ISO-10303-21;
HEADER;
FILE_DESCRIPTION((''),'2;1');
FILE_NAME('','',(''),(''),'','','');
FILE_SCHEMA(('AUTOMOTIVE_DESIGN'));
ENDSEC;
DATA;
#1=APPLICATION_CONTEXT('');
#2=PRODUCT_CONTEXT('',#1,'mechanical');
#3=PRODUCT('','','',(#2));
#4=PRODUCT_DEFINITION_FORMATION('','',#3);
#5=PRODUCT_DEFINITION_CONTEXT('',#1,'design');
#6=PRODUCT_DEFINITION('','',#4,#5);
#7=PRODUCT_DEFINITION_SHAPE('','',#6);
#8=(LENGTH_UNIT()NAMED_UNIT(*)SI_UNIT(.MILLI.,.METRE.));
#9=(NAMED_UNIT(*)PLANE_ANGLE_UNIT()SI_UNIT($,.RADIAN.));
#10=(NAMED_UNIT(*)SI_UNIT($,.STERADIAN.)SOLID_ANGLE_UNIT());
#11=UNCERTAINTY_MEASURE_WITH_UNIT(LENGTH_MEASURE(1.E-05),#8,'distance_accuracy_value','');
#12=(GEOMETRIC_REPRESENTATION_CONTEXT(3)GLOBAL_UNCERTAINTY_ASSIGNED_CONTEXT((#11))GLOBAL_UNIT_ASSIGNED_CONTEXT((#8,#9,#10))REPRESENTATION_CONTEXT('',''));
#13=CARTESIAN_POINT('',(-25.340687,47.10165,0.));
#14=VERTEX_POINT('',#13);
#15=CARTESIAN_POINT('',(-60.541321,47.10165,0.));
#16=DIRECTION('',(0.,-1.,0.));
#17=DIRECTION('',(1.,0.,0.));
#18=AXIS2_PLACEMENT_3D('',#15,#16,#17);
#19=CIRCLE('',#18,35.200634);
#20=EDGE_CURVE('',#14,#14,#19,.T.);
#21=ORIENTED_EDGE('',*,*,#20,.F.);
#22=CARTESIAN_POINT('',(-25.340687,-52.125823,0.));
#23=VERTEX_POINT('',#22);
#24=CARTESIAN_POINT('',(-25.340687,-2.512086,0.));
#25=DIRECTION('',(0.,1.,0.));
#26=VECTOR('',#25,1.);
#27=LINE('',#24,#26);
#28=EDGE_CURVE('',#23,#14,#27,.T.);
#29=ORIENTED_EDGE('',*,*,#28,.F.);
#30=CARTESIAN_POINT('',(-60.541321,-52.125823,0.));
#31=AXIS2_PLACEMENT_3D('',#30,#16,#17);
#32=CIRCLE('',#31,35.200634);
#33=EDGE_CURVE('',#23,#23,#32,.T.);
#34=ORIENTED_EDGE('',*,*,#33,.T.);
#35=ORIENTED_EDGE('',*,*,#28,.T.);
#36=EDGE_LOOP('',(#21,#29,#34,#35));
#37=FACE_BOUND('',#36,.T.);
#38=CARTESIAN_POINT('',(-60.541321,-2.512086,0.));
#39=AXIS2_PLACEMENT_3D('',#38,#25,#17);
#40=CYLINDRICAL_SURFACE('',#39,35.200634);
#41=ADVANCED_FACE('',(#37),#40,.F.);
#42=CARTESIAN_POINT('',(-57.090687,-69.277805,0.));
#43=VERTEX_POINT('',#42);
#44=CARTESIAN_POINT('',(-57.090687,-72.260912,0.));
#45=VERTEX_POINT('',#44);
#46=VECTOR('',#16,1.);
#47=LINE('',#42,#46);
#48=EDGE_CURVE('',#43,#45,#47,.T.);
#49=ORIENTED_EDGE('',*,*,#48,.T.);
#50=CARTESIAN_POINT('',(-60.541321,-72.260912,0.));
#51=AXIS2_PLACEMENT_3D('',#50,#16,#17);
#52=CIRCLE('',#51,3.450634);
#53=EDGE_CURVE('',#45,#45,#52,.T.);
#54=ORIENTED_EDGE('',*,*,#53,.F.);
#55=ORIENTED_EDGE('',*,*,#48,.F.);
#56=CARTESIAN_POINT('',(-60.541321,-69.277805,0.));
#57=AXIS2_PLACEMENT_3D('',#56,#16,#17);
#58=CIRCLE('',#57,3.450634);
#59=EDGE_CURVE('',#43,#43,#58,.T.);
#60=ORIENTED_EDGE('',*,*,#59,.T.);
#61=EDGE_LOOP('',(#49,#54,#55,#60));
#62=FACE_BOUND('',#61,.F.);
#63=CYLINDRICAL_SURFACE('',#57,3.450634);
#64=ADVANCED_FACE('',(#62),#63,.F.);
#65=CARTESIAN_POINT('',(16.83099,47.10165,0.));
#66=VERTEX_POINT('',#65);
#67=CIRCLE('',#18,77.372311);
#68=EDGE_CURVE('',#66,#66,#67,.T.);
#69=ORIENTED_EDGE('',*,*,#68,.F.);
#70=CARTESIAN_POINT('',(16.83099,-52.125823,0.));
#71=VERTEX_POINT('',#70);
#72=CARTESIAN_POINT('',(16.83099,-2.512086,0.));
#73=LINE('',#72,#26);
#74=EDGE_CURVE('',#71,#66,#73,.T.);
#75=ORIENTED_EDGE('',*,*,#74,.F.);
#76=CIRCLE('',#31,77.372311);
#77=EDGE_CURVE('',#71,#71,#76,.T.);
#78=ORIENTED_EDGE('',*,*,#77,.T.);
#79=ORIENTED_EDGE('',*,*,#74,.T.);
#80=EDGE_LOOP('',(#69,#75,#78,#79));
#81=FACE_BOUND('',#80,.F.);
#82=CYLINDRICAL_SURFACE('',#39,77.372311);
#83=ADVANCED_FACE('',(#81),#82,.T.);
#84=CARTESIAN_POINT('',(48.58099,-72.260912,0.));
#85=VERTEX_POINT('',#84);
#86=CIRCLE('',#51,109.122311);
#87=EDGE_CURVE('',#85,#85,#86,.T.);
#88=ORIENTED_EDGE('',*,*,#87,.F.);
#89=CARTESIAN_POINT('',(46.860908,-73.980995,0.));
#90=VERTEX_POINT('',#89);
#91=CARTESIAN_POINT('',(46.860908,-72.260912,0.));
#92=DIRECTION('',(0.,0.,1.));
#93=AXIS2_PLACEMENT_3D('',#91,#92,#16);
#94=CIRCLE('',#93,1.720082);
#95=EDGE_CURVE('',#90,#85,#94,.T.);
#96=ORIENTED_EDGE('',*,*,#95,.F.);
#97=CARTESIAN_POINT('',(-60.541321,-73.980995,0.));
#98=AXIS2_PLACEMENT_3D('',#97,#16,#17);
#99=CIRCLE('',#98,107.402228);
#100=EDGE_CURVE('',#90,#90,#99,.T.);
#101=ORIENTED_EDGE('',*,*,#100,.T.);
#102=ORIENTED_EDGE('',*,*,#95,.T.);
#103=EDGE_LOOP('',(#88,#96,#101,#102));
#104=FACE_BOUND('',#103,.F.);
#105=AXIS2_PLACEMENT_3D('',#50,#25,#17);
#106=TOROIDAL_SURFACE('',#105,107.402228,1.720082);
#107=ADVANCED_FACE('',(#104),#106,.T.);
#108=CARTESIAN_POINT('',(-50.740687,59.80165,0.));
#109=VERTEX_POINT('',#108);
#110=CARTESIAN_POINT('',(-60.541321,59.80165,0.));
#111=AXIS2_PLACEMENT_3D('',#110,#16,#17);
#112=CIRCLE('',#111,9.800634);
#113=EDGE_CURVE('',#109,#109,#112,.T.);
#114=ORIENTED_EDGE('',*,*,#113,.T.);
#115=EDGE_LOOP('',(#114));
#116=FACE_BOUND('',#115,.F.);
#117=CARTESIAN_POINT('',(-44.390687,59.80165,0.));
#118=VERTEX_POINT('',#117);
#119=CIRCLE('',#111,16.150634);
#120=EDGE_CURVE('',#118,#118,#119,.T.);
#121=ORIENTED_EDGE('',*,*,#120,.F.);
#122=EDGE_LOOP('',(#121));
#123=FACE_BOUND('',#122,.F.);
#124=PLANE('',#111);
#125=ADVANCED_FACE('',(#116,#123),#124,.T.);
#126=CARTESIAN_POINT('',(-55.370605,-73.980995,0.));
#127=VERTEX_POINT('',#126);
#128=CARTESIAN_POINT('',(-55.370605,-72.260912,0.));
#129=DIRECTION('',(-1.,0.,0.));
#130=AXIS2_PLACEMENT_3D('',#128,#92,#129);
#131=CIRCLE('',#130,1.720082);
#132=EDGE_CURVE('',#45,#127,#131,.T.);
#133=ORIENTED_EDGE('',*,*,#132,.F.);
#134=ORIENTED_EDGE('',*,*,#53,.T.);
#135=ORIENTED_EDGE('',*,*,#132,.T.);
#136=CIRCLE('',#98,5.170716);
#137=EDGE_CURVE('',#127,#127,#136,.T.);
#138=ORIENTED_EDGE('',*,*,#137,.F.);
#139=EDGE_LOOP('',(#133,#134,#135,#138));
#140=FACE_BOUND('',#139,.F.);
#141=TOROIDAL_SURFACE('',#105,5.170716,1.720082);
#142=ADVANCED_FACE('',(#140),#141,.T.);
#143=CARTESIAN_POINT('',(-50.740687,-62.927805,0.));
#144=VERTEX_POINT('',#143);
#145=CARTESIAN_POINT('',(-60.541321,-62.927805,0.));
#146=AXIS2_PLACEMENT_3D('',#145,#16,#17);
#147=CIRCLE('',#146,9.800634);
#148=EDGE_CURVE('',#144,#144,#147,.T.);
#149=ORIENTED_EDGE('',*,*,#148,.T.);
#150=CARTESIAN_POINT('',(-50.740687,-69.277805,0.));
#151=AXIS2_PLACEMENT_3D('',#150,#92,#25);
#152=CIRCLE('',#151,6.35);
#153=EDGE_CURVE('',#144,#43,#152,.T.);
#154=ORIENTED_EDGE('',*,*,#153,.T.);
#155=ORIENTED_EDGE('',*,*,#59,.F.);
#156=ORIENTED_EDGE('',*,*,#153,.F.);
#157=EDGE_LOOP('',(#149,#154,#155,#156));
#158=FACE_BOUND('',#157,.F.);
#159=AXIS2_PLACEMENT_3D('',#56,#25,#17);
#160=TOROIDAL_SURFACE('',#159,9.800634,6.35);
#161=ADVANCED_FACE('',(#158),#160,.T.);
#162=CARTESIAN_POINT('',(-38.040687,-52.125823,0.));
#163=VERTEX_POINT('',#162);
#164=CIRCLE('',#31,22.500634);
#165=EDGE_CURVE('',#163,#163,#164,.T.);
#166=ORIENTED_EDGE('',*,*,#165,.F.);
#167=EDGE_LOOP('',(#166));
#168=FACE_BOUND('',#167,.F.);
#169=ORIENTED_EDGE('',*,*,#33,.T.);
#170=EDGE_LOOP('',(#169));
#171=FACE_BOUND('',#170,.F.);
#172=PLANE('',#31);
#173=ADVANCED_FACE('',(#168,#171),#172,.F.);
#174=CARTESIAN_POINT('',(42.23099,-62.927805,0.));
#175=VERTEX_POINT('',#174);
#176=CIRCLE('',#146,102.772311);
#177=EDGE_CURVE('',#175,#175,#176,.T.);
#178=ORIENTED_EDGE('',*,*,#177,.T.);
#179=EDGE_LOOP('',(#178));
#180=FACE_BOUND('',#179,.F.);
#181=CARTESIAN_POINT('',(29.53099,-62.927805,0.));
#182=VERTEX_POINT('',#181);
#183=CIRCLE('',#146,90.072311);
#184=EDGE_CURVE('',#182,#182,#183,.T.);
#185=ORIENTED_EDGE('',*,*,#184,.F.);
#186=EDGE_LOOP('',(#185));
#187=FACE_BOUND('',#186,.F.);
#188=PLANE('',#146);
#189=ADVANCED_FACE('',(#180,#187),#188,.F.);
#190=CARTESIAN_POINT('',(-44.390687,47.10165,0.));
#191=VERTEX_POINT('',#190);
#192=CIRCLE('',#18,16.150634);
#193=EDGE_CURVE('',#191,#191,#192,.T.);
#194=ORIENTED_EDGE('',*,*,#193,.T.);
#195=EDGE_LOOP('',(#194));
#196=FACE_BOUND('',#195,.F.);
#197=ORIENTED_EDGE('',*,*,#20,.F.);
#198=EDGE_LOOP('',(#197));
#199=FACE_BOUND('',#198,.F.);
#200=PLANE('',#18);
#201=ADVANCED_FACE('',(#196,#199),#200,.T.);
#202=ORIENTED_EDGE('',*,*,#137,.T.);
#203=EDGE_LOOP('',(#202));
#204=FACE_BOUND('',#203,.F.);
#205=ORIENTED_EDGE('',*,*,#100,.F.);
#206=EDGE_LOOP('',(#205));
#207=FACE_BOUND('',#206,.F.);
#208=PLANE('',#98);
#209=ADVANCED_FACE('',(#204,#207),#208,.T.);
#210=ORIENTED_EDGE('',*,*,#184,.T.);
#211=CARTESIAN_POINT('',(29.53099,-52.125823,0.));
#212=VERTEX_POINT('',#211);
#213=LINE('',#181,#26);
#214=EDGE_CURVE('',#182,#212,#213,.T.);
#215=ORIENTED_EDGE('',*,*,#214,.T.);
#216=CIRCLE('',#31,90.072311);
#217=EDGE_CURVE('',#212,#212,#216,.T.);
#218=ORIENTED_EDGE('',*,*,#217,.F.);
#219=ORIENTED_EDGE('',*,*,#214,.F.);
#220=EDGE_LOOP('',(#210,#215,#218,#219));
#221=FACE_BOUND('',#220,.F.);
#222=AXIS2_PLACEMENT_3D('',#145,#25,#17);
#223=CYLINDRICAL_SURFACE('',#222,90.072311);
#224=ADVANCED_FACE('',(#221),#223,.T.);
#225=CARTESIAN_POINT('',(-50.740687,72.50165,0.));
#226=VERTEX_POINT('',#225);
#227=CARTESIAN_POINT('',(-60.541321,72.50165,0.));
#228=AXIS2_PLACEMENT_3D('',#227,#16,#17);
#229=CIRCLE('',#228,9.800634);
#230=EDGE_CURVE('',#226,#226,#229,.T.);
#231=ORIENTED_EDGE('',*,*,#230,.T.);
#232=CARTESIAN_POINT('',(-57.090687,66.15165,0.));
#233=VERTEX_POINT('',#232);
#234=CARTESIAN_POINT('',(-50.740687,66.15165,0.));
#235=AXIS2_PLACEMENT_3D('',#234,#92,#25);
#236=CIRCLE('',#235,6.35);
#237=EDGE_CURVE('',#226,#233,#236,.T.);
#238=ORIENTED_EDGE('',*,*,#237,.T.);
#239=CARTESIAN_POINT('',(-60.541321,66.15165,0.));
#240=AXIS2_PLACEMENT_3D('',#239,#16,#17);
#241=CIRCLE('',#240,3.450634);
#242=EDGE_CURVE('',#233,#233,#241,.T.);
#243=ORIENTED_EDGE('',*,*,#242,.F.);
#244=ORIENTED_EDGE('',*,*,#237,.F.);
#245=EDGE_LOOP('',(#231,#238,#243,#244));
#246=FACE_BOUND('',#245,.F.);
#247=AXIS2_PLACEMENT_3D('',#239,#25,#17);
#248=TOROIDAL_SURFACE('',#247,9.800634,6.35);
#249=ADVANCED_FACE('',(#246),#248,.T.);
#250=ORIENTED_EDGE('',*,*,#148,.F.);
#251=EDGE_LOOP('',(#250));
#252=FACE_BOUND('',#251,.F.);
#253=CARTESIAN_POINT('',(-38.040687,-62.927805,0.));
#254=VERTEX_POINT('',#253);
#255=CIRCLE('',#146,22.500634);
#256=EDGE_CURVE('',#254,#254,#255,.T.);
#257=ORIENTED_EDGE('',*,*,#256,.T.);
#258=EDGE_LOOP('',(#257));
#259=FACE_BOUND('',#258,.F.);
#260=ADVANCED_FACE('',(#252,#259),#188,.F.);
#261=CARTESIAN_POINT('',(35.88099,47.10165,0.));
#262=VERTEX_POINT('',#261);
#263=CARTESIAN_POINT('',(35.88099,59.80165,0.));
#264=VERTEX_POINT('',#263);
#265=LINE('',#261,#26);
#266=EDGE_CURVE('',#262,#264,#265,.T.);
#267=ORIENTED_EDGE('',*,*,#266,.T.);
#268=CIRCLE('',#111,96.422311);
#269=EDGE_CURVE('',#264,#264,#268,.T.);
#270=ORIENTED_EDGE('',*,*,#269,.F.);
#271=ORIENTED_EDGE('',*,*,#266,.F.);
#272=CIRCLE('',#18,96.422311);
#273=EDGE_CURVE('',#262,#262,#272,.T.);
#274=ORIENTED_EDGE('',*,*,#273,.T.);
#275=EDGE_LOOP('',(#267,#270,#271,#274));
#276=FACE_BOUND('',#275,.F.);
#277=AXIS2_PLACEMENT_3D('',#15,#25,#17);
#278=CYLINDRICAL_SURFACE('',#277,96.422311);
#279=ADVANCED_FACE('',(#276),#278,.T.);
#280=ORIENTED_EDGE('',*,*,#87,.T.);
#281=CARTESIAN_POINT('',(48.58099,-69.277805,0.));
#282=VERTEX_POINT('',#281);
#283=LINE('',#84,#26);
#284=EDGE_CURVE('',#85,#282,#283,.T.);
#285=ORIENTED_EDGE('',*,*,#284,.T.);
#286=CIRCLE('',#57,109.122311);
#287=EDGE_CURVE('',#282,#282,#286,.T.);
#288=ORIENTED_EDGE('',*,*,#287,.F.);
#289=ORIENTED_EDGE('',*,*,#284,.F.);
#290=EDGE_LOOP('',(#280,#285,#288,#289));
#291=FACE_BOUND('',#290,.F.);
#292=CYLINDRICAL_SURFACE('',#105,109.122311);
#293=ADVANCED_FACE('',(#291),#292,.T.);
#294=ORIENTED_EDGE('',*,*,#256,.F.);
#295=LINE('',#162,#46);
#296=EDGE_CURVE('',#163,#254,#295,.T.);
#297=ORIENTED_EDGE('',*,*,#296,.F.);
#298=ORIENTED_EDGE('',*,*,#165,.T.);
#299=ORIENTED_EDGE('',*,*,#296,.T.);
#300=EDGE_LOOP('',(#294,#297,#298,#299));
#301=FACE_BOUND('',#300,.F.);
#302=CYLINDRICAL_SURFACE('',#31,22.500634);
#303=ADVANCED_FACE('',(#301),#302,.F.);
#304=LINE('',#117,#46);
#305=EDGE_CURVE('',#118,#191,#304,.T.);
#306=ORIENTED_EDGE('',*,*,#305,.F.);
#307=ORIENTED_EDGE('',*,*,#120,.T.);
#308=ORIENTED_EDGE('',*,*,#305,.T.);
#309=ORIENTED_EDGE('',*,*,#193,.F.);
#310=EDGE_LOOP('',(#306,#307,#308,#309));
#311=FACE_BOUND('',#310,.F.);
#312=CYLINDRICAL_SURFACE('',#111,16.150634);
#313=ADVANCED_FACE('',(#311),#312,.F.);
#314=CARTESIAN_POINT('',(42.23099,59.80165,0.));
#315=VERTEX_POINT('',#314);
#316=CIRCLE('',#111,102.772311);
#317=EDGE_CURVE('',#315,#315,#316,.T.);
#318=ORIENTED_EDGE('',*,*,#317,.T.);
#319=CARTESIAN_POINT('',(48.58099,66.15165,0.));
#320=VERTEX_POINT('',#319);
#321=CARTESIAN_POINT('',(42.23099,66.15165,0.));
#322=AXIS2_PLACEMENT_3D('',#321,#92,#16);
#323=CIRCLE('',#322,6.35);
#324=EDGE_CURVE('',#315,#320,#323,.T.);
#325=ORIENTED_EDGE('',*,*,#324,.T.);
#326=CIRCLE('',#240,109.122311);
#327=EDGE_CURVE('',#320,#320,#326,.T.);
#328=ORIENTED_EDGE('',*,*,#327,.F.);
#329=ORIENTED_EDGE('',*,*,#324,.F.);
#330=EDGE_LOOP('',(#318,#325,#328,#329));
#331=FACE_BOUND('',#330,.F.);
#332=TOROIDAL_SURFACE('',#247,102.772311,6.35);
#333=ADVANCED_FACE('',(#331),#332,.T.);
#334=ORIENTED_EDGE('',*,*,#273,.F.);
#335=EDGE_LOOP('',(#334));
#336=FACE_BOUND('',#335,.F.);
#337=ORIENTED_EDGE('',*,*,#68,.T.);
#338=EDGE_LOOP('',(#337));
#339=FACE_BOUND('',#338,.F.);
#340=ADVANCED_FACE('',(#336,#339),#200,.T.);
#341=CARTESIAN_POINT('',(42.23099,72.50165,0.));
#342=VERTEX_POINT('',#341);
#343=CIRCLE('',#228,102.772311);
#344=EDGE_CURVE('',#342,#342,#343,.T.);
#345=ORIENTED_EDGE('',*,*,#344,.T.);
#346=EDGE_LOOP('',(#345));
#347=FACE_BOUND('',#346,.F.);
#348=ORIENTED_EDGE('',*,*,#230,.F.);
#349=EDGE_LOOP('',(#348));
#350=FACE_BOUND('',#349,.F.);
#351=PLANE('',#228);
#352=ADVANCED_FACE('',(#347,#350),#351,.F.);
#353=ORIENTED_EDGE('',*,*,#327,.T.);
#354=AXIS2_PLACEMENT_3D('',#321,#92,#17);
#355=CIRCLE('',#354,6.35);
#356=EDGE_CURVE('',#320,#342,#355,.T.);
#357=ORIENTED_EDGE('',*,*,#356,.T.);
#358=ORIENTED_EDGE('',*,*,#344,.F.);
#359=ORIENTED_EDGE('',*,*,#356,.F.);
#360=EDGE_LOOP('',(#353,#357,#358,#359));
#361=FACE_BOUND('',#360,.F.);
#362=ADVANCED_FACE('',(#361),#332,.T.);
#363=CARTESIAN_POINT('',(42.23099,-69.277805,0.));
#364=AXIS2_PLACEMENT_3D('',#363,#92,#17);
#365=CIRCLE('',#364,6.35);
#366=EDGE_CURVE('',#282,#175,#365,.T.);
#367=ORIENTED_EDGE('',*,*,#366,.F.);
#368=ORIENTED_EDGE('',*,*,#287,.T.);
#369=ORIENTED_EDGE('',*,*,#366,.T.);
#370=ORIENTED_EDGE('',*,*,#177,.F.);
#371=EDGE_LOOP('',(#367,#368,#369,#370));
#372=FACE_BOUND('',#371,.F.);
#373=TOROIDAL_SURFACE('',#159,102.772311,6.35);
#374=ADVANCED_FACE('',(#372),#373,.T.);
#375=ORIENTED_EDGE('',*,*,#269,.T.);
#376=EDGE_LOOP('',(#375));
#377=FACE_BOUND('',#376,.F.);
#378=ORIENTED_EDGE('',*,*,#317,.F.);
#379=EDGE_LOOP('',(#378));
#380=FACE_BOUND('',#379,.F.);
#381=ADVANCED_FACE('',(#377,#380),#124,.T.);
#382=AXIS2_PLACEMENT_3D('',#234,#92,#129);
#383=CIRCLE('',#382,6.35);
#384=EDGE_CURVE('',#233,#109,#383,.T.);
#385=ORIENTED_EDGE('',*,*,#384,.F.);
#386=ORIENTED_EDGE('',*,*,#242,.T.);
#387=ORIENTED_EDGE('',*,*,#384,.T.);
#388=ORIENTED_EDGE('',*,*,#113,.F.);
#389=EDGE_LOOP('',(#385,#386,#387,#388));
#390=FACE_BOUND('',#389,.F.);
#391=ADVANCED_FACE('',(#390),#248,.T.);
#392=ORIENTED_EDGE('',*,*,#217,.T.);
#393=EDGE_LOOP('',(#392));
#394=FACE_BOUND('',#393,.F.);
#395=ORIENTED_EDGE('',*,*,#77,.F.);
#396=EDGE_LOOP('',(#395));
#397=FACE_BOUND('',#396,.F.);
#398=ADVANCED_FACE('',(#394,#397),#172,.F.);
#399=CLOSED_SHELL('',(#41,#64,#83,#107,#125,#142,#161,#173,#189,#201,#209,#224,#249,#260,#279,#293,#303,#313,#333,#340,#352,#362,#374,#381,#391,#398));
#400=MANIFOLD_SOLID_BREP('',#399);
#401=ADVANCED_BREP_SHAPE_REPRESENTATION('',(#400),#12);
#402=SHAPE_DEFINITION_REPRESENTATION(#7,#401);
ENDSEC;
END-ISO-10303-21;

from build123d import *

# Parameters (mm, degrees)
F0_W = 42.1716768198
F0_H = 99.2274731398


with BuildPart() as f1:
    # F0 (on Top) → F1 (revolve)
    with BuildSketch(Plane.XY):
        Polygon((-44.3906867288, 47.101650387), (-25.3406867288, 47.101650387), (16.830990091, 47.101650387), (35.880990091, 47.101650387), (35.880990091, 59.801650387), (-44.3906867288, 59.801650387), align=None)
        with Locations((-4.2548483189, -2.5120861828)):
            Rectangle(F0_W, F0_H)
        Polygon((16.830990091, -52.1258227527), (-25.3406867288, -52.1258227527), (-38.0406867288, -52.1258227527), (-38.0406867288, -62.9278048873), (29.530990091, -62.9278048873), (29.530990091, -52.1258227527), align=None)
        with BuildLine():
            Line((-50.7406867288, 59.801650387), (-44.3906867288, 59.801650387))
            Line((-44.3906867288, 59.801650387), (35.880990091, 59.801650387))
            Line((35.880990091, 59.801650387), (42.230990091, 59.801650387))
            ThreePointArc((42.230990091, 59.801650387), (46.7211181515, 61.6615223265), (48.580990091, 66.151650387))
            ThreePointArc((48.580990091, 66.151650387), (46.7211181515, 70.6417784476), (42.230990091, 72.501650387))
            Line((42.230990091, 72.501650387), (-50.7406867288, 72.501650387))
            ThreePointArc((-50.7406867288, 72.501650387), (-55.2308147893, 70.6417784476), (-57.0906867288, 66.151650387))
            ThreePointArc((-57.0906867288, 66.151650387), (-55.2308147893, 61.6615223265), (-50.7406867288, 59.801650387))
        make_face()
        with BuildLine():
            Line((29.530990091, -62.9278048873), (-38.0406867288, -62.9278048873))
            Line((-38.0406867288, -62.9278048873), (-50.7406867288, -62.9278048873))
            ThreePointArc((-50.7406867288, -62.9278048873), (-55.2308147893, -64.7876768268), (-57.0906867288, -69.2778048873))
            Line((-57.0906867288, -69.2778048873), (-57.0906867288, -72.2609122954))
            ThreePointArc((-57.0906867288, -72.2609122954), (-56.5868863087, -73.4771941024), (-55.3706045017, -73.9809945226))
            Line((-55.3706045017, -73.9809945226), (46.8609078638, -73.9809945226))
            ThreePointArc((46.8609078638, -73.9809945226), (48.0771896708, -73.4771941024), (48.580990091, -72.2609122954))
            Line((48.580990091, -72.2609122954), (48.580990091, -69.2778048873))
            ThreePointArc((48.580990091, -69.2778048873), (46.7211181515, -64.7876768268), (42.230990091, -62.9278048873))
            Line((42.230990091, -62.9278048873), (29.530990091, -62.9278048873))
        make_face()
    revolve(axis=Axis((-60.5413205922, 7.4106594548, 0), (0, -1, 0)))


solid = f1.part
